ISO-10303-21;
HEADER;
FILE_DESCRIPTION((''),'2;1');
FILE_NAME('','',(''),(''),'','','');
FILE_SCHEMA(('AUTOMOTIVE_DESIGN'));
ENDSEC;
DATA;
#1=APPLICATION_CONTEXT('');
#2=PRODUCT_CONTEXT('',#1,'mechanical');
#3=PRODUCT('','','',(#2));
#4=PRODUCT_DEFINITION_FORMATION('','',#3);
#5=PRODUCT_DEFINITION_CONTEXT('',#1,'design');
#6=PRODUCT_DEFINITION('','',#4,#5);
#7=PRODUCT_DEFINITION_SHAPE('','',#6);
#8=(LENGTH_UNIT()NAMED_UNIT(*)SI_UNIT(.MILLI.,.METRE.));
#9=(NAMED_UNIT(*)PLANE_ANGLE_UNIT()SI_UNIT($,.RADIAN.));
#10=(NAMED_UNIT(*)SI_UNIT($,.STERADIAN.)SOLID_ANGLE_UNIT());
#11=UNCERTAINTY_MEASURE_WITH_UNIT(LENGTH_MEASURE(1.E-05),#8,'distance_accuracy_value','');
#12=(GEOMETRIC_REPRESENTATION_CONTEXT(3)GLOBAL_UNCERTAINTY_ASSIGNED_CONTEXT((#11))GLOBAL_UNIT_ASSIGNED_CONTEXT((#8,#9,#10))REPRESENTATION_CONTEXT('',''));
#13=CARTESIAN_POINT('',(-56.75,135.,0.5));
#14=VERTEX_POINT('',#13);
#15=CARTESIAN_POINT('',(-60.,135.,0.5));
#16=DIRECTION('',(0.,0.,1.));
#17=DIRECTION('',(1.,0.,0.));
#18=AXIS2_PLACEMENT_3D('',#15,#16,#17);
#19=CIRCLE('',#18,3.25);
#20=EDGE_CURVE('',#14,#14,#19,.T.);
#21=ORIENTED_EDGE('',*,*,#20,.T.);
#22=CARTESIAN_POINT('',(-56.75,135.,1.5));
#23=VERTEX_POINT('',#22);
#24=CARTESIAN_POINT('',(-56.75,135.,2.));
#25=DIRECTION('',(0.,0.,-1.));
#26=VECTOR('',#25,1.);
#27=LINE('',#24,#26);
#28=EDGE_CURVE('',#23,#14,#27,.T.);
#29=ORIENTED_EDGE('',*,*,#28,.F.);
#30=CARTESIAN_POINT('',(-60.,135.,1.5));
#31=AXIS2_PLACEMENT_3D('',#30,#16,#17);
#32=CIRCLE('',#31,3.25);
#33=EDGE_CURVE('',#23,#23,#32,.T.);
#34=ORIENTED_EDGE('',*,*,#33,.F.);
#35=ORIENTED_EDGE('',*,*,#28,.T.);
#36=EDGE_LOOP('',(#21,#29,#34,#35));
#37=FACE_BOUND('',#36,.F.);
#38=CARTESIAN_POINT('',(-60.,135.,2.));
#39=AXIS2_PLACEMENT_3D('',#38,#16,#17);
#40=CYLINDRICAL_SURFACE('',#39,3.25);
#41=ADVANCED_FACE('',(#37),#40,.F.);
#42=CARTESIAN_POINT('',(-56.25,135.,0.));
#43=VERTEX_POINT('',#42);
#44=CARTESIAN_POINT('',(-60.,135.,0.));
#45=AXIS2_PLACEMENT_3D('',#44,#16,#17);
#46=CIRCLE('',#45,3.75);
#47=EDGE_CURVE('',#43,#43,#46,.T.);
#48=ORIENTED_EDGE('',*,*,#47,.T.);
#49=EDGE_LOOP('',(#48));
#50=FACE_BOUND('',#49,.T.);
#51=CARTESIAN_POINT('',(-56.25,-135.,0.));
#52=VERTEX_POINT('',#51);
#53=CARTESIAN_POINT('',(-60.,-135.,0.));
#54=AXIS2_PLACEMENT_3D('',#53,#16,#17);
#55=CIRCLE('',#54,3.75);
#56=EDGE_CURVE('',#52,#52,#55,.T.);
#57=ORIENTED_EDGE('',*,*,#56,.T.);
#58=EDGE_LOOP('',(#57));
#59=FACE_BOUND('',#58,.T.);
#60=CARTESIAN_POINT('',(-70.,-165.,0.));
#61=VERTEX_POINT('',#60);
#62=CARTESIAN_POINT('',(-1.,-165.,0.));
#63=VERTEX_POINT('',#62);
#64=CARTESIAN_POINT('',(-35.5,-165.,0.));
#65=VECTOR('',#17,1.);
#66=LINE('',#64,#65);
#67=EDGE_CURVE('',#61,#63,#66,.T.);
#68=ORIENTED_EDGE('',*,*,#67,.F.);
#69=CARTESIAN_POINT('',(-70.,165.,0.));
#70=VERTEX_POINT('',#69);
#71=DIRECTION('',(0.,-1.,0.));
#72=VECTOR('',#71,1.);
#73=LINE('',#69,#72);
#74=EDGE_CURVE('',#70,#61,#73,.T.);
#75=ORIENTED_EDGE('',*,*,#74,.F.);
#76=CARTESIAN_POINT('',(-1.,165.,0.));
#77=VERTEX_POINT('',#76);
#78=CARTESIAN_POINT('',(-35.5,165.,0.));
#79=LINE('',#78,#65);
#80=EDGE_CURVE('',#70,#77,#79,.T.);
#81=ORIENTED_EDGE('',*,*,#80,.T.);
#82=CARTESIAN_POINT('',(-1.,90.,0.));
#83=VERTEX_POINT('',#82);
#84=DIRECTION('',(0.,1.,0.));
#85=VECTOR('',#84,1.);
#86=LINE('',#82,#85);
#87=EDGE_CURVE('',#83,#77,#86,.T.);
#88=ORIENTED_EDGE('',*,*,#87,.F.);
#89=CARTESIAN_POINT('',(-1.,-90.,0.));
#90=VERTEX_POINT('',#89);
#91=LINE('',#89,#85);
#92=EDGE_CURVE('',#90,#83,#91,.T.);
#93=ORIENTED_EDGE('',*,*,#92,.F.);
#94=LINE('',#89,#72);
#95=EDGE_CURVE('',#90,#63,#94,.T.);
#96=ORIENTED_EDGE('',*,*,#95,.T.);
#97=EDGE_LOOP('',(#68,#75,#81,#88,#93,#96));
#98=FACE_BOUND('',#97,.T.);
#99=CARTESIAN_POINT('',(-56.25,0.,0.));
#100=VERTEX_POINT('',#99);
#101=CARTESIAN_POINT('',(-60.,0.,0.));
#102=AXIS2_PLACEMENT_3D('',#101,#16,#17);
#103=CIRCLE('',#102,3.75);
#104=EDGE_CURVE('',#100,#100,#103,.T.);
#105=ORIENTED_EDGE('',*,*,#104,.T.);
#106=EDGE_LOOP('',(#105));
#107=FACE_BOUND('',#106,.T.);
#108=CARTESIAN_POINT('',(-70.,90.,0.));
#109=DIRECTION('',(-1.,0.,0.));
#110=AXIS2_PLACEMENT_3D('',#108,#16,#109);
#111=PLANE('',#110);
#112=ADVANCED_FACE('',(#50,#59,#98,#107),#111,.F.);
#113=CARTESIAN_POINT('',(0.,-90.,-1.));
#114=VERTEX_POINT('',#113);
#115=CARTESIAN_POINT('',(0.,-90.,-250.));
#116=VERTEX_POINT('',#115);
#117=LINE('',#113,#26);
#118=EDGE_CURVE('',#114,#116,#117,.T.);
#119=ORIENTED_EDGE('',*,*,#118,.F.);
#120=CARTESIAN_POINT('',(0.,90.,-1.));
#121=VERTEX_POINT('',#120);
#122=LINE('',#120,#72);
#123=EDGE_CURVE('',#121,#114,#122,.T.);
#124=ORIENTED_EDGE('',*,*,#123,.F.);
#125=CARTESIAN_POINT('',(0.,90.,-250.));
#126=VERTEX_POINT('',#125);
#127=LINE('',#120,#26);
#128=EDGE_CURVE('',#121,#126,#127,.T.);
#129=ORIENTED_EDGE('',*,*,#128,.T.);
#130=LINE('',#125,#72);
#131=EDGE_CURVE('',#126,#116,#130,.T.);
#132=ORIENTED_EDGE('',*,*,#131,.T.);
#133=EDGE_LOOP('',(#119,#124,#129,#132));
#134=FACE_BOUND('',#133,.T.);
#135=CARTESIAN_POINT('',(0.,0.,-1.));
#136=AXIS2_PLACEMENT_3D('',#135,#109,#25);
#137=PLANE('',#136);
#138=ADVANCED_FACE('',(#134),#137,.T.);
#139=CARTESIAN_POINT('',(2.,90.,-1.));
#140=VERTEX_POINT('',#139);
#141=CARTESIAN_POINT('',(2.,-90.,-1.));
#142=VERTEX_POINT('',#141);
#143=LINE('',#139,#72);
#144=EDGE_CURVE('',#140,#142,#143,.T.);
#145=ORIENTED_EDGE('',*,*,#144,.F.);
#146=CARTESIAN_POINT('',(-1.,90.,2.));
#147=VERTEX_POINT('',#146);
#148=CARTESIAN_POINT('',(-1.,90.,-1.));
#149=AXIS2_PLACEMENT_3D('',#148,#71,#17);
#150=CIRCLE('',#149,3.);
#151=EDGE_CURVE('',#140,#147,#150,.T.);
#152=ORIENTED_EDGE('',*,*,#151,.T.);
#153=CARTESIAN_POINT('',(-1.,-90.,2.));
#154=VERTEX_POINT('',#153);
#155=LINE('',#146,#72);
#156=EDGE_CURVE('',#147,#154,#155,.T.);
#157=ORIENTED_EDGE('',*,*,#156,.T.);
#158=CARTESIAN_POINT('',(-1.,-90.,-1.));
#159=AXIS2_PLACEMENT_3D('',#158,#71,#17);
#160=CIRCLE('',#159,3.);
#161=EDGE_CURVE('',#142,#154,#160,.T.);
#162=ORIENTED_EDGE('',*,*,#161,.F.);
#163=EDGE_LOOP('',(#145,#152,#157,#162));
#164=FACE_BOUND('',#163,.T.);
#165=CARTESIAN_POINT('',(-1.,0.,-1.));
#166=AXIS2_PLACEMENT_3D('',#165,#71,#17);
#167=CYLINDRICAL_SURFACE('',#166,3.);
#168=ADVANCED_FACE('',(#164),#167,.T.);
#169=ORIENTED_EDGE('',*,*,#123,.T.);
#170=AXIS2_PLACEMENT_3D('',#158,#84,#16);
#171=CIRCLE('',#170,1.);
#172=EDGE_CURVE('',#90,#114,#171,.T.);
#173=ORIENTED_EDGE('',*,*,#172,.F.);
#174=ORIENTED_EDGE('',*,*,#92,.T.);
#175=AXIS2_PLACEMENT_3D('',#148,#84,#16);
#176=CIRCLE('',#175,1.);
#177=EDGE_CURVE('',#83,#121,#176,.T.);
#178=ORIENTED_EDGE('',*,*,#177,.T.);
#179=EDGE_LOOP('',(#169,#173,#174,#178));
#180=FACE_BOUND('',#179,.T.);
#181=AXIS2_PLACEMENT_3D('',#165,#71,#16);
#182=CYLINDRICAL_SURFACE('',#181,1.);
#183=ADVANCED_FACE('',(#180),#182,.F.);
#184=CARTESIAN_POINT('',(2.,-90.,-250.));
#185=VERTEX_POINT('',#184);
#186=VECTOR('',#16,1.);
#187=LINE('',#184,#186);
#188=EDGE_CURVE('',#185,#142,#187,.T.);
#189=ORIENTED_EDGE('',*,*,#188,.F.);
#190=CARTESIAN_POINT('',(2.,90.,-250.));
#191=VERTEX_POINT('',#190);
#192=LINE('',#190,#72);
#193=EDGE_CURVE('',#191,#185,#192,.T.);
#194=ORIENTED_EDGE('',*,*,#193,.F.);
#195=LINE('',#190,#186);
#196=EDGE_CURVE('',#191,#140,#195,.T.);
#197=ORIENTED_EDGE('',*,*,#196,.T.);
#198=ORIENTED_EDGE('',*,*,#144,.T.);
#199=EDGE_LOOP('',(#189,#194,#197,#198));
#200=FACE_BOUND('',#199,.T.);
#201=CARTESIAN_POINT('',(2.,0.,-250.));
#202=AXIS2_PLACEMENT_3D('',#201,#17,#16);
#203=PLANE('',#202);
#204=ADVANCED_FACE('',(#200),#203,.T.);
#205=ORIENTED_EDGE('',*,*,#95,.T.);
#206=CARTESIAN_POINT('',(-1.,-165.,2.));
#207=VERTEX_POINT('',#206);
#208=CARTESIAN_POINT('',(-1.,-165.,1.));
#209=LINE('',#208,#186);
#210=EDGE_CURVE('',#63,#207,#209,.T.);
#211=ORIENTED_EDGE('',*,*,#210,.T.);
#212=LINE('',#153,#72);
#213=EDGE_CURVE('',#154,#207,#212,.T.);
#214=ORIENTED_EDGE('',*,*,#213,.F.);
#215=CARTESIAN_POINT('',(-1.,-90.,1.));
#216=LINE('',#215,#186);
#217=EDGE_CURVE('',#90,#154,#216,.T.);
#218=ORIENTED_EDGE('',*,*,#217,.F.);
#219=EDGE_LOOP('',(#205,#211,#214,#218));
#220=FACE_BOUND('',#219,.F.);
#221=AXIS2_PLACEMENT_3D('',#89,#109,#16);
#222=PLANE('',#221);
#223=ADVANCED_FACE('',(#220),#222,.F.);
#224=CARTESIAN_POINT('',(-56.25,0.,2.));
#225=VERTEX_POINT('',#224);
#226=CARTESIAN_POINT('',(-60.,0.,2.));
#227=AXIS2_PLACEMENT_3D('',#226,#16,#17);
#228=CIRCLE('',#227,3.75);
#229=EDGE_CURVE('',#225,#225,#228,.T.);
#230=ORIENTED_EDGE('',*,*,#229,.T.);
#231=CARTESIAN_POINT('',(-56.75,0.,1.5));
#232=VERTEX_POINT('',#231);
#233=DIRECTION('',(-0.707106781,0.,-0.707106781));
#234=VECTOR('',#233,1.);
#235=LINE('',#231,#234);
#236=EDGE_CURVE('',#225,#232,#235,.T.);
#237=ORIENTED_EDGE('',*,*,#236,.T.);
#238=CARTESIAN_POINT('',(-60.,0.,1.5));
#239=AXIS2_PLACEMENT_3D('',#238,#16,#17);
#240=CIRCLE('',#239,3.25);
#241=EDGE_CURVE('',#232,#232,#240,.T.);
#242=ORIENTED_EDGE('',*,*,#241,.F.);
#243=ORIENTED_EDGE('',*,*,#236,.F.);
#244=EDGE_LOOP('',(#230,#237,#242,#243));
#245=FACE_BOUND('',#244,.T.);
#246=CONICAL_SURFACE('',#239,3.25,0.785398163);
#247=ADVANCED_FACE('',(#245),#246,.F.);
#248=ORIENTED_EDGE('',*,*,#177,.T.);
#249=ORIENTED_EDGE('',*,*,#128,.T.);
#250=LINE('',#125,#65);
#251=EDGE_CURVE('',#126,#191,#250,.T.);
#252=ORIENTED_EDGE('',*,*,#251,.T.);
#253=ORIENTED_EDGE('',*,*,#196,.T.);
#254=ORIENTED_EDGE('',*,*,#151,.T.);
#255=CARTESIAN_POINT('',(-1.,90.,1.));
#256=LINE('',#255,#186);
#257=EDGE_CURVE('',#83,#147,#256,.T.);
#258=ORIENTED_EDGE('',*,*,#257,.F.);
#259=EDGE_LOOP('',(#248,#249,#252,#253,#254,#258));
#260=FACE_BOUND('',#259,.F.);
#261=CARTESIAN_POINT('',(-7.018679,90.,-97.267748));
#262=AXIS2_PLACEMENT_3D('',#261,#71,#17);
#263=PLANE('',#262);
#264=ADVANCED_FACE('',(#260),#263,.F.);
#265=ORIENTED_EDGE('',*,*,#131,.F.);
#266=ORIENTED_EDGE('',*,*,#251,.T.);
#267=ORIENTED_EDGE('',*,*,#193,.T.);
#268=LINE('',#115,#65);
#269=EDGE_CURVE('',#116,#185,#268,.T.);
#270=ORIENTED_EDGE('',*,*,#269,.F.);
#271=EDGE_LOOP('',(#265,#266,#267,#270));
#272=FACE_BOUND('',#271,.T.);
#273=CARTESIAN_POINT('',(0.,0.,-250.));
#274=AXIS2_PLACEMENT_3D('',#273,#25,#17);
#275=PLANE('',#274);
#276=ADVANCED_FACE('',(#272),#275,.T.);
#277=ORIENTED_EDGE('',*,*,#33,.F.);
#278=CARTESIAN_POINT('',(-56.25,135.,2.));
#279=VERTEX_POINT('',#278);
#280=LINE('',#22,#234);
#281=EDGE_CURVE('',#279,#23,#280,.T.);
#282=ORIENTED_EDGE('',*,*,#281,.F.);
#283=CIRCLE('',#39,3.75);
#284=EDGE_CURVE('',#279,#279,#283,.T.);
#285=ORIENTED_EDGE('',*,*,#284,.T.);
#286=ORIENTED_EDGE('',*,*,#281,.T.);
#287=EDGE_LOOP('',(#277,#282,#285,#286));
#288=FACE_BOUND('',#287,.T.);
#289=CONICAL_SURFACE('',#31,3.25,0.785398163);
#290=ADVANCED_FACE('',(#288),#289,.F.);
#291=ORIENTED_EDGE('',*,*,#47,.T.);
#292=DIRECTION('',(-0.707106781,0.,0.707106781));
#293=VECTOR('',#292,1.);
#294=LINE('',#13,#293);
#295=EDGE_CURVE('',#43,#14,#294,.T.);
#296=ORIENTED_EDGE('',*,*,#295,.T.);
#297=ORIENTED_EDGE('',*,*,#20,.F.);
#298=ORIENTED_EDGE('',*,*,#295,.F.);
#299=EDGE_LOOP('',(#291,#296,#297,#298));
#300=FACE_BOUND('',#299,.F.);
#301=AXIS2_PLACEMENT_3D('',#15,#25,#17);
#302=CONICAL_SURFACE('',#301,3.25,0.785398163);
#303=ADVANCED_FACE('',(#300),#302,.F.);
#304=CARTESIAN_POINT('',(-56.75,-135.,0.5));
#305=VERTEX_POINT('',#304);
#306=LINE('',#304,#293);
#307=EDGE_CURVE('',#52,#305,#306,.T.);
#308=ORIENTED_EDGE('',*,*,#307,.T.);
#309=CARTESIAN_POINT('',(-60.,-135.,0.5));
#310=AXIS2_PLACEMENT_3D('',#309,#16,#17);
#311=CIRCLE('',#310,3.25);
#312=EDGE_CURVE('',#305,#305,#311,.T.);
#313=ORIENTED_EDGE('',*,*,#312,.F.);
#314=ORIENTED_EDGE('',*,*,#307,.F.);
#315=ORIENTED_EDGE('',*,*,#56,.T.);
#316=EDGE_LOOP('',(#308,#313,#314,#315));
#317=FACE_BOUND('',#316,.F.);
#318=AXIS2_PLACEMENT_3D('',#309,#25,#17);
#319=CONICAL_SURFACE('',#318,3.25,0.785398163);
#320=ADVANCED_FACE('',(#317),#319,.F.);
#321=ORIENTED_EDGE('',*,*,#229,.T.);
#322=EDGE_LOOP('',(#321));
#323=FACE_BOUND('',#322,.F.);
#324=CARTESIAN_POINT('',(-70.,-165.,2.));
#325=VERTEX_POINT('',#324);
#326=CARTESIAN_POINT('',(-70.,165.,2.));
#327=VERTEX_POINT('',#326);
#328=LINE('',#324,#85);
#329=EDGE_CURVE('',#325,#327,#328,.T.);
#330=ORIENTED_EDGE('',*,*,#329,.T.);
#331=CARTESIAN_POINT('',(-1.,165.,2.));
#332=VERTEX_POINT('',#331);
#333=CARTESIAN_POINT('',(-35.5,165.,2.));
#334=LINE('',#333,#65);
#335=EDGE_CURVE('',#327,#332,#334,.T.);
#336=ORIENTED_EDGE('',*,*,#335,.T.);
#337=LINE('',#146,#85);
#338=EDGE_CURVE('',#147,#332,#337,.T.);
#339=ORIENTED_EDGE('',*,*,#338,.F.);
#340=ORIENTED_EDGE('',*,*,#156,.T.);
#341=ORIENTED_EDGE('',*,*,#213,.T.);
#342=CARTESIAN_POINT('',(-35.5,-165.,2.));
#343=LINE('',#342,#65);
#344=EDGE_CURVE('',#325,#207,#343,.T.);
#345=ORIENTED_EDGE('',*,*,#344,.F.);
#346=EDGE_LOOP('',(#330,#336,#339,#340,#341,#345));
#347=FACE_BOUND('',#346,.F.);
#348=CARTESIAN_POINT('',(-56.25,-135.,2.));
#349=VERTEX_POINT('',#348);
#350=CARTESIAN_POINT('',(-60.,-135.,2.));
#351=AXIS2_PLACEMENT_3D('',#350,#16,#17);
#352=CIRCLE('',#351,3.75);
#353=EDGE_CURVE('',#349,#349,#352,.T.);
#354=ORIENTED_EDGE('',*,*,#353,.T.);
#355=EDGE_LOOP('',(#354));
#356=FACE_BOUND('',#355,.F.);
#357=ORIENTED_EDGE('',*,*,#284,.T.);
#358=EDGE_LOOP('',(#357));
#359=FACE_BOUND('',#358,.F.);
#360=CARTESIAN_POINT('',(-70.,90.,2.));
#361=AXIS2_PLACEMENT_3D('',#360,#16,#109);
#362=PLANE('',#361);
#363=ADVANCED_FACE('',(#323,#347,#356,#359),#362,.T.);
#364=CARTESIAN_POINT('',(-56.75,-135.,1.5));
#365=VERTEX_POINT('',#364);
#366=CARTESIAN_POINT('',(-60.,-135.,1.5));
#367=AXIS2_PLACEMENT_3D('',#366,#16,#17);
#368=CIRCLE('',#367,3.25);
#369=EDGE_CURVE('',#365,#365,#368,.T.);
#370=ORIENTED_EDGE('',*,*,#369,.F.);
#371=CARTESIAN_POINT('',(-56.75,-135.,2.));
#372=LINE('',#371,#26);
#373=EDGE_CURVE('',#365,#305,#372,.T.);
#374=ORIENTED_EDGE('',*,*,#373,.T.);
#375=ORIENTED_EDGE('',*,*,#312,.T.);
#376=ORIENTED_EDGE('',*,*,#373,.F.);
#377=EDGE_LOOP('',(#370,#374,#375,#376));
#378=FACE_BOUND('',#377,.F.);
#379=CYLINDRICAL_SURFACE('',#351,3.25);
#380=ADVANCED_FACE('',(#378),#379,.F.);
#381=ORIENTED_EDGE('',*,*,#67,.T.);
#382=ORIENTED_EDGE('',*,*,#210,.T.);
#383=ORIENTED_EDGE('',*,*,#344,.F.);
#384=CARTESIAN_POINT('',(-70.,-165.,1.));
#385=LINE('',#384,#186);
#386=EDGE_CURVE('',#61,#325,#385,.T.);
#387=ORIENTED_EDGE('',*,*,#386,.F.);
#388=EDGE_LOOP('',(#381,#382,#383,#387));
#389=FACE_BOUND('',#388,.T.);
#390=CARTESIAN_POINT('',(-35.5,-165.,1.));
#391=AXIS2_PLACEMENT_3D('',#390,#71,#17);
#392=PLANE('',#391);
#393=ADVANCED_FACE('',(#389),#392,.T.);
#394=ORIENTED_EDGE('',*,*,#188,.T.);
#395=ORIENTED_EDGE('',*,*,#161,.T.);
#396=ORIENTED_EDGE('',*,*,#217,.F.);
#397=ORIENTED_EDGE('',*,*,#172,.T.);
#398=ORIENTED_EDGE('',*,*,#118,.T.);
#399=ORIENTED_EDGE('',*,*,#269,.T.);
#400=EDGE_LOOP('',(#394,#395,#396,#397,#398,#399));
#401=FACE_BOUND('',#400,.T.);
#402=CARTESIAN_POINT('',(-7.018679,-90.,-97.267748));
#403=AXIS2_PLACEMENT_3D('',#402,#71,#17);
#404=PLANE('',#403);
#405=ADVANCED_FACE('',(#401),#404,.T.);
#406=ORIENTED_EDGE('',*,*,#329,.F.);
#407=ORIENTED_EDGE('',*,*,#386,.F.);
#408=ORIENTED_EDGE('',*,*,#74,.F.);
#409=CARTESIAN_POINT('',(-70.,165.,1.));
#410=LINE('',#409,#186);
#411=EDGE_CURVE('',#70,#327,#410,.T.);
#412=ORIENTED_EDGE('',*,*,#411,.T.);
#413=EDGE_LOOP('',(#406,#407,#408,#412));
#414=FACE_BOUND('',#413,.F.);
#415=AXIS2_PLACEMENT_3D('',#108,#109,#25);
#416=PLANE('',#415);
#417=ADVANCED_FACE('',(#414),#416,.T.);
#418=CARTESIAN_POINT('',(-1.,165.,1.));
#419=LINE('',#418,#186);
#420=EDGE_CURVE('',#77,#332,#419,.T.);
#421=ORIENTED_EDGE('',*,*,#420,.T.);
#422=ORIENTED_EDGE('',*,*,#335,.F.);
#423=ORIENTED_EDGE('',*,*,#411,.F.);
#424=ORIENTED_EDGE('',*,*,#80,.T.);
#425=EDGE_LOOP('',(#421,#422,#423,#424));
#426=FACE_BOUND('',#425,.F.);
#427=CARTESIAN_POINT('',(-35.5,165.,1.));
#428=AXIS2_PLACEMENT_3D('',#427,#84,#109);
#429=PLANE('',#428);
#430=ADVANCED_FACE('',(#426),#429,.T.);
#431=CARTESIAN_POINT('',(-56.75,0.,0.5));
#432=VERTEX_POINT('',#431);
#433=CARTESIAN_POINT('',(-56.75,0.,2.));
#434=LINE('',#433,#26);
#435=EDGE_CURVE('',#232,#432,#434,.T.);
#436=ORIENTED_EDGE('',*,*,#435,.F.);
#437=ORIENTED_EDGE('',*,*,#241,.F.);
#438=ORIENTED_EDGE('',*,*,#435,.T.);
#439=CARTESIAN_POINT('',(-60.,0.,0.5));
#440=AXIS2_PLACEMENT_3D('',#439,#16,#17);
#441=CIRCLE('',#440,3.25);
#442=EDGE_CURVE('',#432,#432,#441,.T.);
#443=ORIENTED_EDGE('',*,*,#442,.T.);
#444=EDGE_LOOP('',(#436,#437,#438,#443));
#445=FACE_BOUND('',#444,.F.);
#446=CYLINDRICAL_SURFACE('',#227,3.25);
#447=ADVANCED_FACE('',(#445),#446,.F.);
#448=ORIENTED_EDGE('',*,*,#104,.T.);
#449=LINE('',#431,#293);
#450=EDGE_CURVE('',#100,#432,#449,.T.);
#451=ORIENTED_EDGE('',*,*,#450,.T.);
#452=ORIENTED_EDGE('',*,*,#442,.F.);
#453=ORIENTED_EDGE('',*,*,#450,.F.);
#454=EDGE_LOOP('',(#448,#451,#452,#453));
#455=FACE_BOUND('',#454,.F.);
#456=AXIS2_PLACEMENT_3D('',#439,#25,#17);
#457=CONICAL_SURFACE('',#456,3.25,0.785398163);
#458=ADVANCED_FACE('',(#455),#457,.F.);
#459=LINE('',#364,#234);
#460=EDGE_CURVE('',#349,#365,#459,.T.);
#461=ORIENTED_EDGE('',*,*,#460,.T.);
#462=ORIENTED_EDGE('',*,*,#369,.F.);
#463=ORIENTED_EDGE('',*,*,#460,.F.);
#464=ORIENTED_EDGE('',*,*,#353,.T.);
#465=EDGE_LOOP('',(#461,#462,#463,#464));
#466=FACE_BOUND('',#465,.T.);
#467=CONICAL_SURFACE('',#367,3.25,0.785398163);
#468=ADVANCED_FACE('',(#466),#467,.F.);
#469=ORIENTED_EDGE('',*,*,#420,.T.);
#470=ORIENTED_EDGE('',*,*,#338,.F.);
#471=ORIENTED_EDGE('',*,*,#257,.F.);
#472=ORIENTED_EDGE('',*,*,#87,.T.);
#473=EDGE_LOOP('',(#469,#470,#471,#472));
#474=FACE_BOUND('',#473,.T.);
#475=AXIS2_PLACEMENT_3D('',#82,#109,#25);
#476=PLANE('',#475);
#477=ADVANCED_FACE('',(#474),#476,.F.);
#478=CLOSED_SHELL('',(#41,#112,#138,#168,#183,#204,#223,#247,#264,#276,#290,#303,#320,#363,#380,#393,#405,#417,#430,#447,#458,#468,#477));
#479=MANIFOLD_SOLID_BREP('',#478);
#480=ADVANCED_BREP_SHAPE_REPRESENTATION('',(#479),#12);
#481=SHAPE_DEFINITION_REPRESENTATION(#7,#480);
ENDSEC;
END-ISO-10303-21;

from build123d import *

# Parameters (mm, degrees)
F1_DEPTH = 90
F2_W     = 69
F2_H     = 2
F3_DEPTH = 75
F4_R     = 3.25
F5_DEPTH = 25
F6_SIZE  = 0.5


# Not quite as in the source:
# - a pattern or mirror of a feature is missing from the dataset's text; its kind, count and spacing are read off the source's solid


with BuildPart() as f1:
    # F0 (on Front) → F1 (new body, symmetric)
    with BuildSketch(Plane.XZ):
        with BuildLine():
            ThreePointArc((-1, 0), (-0.2928932188, -0.2928932188), (0, -1))
            Line((0, -1), (0, -250))
            Line((0, -250), (2, -250))
            Line((2, -250), (2, -1))
            ThreePointArc((2, -1), (1.1213203436, 1.1213203436), (-1, 2))
            Line((-1, 2), (-70, 2))
            Line((-70, 2), (-70, 0))
            Line((-70, 0), (-1, 0))
        make_face()
    extrude(amount=F1_DEPTH, both=True)

    # F2 (on face) → F3 (join)
    with BuildSketch(Plane.XZ.offset(90)):
        with Locations((-35.5, 1)):
            Rectangle(F2_W, F2_H)
    f3 = extrude(amount=F3_DEPTH)

    # F3_copies: F3 across plane
    add(f3.mirror(Plane.ZX))

    # F4 (on face) → F5 (cut)
    with BuildSketch(Plane.XY.offset(2)):
        with Locations((-60, 135)):
            Circle(F4_R)
        with Locations((-60, 0)):
            Circle(F4_R)
        with Locations((-60, -135)):
            Circle(F4_R)
    extrude(amount=-F5_DEPTH, mode=Mode.SUBTRACT)

    # F6
    f6_edges = [f1.edges().sort_by_distance(p)[0] for p in [
        (-63.25, 135, 2),
        (-56.75, 135, 1),
        (-63.25, 135, 0),
        (-63.25, 0, 2),
        (-56.75, 0, 1),
        (-63.25, 0, 0),
        (-63.25, -135, 2),
        (-56.75, -135, 1),
        (-63.25, -135, 0),
    ]]
    chamfer(f6_edges, length=F6_SIZE)


solid = f1.part
